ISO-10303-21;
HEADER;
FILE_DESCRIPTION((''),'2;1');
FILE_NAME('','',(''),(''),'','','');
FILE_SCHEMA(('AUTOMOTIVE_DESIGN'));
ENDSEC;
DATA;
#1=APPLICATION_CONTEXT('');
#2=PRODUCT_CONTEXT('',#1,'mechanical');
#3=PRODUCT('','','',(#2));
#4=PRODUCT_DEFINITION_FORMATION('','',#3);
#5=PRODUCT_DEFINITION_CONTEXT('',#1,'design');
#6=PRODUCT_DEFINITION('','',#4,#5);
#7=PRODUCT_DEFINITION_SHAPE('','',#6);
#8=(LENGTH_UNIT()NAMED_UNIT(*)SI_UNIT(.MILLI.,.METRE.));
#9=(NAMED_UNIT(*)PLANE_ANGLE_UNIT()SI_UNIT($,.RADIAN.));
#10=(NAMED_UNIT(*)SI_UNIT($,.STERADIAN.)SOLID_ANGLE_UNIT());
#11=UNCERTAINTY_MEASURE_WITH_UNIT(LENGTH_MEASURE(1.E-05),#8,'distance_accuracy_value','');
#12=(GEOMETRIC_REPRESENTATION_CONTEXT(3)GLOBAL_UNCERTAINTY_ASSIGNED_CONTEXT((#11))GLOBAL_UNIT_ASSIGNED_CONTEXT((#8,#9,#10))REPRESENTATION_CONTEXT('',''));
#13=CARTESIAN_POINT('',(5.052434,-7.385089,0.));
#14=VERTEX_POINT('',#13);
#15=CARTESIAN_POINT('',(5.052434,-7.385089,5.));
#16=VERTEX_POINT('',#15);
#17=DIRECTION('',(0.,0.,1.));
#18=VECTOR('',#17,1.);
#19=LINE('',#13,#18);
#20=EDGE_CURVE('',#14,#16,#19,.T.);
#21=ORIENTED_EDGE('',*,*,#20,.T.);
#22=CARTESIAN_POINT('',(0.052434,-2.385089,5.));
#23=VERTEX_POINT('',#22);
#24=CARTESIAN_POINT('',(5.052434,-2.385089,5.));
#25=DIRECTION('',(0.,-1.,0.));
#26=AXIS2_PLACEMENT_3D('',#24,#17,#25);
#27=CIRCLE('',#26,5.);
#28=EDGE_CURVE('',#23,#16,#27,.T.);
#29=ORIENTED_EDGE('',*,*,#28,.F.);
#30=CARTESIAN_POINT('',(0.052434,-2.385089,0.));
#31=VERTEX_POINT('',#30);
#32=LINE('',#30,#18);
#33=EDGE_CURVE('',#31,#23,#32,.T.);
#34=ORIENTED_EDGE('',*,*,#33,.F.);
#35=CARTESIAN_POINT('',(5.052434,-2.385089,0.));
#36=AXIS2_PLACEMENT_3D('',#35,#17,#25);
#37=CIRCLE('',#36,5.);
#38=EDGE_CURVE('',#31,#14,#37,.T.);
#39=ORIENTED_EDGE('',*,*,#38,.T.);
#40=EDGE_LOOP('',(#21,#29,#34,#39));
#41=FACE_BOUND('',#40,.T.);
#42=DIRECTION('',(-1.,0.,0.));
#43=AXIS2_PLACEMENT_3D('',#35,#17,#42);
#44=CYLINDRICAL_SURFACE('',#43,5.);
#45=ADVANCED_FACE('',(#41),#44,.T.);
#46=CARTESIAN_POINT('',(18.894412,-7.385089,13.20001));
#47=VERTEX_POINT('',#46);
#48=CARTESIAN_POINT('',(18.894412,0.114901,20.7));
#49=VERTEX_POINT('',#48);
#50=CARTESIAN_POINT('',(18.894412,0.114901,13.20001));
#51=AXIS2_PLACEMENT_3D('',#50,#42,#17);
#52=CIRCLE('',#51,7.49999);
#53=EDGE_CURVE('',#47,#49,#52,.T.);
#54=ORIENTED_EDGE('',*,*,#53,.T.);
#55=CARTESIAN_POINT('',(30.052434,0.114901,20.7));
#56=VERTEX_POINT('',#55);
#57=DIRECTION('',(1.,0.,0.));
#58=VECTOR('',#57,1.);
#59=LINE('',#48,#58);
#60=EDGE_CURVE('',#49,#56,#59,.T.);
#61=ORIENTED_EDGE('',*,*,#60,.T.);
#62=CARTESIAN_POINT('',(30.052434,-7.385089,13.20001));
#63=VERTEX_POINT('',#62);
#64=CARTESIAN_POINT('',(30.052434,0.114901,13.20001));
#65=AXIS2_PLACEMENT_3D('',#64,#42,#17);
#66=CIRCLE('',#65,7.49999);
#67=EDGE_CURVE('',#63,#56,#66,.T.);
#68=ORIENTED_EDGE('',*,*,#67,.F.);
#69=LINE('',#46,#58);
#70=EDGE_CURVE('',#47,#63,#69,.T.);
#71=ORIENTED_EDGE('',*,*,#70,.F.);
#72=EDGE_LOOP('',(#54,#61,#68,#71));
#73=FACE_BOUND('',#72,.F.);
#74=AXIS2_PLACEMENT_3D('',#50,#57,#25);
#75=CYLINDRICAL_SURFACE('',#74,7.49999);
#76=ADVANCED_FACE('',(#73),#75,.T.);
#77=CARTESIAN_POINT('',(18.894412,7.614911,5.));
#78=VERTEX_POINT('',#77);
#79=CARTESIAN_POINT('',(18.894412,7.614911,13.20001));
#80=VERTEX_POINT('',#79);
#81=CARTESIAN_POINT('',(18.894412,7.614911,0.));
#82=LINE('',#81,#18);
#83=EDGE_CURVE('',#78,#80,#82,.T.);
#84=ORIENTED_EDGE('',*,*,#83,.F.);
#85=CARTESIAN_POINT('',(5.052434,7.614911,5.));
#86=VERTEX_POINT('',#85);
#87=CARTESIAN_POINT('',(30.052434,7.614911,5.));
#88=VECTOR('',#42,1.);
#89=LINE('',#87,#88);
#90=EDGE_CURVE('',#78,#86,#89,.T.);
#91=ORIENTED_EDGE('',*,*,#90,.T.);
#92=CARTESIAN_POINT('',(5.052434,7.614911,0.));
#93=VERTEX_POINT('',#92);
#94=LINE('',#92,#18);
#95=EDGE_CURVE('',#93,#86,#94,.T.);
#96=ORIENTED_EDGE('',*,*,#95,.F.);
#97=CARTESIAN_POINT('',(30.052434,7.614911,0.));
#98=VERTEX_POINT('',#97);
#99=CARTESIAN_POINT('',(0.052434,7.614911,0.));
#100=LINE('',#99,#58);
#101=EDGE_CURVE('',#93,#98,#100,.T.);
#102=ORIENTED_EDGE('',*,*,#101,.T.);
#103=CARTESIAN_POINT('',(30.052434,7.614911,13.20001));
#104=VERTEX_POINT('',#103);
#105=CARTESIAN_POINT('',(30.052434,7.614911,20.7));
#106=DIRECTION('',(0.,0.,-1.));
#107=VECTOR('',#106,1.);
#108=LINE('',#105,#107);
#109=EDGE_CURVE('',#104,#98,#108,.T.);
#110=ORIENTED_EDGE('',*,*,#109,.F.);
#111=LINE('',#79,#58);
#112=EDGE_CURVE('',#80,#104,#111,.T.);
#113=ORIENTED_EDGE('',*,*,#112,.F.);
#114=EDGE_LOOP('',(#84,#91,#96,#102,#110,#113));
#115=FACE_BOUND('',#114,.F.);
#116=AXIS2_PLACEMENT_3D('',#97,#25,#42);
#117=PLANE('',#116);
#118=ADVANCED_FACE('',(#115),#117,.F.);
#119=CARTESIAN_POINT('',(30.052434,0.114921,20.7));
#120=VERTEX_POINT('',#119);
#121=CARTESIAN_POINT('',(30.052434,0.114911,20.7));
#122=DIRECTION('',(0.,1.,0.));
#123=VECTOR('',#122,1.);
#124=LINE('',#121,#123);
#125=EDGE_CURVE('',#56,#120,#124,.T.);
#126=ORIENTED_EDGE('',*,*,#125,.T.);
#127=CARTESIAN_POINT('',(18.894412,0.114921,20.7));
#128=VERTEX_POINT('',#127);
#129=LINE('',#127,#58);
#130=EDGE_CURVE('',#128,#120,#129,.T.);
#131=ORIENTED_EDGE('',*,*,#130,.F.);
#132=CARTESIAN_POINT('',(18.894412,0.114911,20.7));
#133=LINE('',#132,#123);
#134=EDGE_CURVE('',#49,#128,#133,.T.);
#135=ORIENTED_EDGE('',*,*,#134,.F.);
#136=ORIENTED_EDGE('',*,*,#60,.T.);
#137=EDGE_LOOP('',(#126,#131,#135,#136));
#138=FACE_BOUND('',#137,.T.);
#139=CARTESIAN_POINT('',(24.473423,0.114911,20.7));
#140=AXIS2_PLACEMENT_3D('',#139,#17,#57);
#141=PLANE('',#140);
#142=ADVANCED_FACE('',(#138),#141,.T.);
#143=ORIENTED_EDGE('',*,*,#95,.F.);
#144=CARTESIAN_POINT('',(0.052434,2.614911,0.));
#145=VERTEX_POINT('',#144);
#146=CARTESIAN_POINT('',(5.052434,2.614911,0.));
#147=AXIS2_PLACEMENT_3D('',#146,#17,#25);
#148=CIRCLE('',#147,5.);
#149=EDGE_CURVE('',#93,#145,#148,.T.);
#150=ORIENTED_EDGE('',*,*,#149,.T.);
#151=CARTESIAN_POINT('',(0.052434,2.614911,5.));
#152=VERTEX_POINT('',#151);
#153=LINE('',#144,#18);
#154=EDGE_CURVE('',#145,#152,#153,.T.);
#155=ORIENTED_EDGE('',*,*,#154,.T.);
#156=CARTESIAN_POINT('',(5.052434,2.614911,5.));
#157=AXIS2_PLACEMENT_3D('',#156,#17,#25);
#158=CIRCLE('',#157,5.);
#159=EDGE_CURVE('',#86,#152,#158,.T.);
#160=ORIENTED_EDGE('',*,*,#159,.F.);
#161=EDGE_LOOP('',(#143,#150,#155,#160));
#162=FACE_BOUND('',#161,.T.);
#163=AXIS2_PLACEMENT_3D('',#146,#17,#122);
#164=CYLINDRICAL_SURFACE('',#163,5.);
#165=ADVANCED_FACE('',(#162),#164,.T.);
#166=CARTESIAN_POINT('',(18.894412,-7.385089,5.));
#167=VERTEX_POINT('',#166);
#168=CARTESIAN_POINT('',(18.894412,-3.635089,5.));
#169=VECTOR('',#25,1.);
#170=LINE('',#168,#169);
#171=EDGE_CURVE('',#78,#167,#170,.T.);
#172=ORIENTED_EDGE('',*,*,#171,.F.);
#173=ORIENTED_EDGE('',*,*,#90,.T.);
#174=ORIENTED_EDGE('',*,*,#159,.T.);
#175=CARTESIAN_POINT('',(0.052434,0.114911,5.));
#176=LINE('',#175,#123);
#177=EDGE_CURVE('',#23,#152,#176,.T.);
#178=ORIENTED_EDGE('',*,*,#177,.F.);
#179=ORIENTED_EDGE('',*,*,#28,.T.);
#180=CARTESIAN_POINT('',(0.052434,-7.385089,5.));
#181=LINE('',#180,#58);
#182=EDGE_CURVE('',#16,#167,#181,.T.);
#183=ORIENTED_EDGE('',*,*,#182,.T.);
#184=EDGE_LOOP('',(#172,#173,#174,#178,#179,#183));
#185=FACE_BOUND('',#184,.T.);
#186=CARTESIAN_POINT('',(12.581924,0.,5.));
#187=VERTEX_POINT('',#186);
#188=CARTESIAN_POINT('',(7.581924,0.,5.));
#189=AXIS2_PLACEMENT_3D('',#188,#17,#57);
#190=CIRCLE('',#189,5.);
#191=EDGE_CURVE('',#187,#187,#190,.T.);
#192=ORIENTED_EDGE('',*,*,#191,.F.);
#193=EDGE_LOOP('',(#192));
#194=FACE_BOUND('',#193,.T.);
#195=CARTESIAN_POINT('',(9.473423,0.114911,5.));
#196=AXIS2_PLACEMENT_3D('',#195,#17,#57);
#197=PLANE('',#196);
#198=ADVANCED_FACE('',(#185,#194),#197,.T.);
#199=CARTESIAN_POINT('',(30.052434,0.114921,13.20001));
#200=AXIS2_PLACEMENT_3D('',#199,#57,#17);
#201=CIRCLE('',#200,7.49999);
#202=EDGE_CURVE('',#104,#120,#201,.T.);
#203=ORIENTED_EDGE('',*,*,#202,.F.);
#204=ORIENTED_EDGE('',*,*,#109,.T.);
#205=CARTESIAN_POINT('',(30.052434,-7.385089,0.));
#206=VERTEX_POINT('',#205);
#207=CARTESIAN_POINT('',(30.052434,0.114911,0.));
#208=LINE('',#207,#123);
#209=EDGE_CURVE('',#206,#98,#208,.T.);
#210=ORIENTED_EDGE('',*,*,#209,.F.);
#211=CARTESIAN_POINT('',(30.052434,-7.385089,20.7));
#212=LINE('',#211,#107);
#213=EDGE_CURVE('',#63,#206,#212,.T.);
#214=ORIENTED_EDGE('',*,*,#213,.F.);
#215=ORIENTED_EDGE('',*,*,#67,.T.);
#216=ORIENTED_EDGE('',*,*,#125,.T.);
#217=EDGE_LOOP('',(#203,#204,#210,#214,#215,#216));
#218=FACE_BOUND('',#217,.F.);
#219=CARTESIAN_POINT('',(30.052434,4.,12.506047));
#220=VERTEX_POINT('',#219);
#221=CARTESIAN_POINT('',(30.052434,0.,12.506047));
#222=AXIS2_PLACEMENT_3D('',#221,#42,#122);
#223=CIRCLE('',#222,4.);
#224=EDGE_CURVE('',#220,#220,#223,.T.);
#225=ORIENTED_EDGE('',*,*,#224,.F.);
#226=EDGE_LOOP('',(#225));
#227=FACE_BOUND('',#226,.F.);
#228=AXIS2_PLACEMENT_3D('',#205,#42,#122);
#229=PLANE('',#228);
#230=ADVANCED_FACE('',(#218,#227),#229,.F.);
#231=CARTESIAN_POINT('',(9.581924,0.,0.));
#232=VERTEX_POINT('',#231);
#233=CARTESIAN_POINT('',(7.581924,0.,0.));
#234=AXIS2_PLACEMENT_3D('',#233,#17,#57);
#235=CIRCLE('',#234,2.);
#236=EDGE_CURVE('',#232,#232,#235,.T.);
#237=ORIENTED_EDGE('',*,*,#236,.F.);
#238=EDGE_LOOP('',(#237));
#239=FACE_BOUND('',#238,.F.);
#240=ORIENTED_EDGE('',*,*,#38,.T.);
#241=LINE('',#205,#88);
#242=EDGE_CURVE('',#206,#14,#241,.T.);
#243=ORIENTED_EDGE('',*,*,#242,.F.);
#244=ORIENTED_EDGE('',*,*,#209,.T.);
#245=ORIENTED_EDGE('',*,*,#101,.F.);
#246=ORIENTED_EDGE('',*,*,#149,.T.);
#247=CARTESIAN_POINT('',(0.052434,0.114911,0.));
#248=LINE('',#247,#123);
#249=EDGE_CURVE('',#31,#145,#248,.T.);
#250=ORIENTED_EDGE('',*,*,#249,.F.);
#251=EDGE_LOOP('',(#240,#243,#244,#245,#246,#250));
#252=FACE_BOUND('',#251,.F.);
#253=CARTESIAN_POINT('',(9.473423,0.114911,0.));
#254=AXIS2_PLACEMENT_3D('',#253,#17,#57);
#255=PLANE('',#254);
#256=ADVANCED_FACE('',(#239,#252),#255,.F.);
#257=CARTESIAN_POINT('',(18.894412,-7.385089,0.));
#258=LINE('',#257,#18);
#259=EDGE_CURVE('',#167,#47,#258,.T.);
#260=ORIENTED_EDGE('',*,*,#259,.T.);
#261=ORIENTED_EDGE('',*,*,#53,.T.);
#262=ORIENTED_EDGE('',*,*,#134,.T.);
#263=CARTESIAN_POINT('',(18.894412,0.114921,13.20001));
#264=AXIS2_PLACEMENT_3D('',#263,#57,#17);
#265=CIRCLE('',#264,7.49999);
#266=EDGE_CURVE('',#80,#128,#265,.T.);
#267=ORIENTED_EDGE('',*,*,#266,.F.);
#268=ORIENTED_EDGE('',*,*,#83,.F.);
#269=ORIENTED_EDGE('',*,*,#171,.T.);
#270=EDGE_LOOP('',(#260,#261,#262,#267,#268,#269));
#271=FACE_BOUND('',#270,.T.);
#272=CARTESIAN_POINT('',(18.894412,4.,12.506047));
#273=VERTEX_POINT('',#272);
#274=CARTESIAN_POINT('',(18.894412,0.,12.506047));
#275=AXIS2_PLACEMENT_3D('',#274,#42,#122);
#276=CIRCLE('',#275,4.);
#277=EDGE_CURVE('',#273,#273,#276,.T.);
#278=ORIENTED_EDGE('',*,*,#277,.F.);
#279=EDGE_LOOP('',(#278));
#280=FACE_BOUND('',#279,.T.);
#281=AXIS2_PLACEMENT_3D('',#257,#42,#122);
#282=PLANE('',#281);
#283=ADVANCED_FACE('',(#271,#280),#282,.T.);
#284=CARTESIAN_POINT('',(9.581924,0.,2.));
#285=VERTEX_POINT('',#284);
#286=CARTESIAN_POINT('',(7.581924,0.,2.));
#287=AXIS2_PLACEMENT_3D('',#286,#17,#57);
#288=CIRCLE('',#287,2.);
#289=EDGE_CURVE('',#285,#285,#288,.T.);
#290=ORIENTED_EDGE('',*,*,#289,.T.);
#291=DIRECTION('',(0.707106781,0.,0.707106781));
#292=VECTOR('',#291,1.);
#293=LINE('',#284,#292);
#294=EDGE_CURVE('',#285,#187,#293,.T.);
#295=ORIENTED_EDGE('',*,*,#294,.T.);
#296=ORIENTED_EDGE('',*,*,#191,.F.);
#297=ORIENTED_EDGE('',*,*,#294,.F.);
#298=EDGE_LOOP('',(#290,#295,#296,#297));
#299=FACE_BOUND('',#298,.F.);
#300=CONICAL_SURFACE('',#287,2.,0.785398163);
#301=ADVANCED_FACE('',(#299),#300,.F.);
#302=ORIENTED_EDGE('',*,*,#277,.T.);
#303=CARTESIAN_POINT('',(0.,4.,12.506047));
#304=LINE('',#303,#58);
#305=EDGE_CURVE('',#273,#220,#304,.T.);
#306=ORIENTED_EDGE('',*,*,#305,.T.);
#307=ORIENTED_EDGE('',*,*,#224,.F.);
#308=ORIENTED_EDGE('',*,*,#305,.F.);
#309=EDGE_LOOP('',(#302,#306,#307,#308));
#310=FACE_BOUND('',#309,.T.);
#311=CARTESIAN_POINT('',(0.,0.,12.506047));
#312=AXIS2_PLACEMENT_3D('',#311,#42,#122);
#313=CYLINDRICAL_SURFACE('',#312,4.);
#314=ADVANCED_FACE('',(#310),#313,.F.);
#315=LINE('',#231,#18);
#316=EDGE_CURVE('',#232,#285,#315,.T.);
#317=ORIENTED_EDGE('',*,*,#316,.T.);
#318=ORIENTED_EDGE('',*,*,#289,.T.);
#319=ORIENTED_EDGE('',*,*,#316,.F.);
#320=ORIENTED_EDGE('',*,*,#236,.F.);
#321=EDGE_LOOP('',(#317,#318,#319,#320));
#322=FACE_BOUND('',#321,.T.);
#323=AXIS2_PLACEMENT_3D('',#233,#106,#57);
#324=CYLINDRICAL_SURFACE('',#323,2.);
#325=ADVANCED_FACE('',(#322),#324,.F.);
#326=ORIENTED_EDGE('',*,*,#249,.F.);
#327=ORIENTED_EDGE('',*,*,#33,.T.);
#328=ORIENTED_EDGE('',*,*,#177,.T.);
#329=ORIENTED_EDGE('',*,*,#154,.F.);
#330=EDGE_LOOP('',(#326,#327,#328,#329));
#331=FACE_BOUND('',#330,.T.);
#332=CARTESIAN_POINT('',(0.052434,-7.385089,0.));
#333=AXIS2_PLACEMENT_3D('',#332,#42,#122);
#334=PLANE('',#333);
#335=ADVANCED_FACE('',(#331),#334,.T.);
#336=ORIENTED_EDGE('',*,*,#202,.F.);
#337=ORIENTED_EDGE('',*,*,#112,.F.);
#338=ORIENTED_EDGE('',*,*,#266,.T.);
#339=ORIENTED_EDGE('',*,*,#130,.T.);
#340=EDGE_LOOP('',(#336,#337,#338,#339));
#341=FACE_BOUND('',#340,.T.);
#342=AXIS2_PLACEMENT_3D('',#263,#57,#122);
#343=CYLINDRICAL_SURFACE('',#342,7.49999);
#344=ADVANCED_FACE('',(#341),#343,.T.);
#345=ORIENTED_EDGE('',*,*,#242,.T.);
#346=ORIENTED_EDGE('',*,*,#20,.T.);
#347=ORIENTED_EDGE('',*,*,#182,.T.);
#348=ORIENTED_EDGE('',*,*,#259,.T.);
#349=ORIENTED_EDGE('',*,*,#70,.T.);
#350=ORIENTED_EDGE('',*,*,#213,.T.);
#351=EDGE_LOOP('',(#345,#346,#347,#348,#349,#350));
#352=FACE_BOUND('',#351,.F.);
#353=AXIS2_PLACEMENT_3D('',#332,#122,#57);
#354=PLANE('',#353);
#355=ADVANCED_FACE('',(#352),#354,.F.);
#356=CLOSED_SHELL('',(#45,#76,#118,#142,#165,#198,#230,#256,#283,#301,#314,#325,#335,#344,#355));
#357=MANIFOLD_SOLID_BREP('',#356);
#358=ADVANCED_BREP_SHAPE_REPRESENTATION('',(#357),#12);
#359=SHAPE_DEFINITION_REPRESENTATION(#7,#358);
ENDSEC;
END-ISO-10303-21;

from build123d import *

# Parameters (mm, degrees)
F0_W     = 18.8419777411
F0_H     = 15
F0_R     = 2
F0_W_2   = 11.1580222589
F1_DEPTH = 5
F2_SIZE  = 3
F3_DEPTH = 20.7
F4_R     = 4
F5_DEPTH = 55.3
F6_R     = 7.49999
F7_R     = 5


# Not quite as in the source:
# - a fillet or chamfer is up to 0.001 mm smaller than in the source, because OpenCascade refuses the exact size


with BuildPart() as f1:
    # F0 (on Top) → F1 (new body)
    with BuildSketch(Plane.XY):
        with Locations((9.4734227529, 0.1149109378)):
            Rectangle(F0_W, F0_H)
        with Locations((7.5819236226, 0)):
            Circle(F0_R, mode=Mode.SUBTRACT)
        with Locations((24.4734227529, 0.1149109378)):
            Rectangle(F0_W_2, F0_H)
    extrude(amount=F1_DEPTH)

    # F2
    f2_edges = [f1.edges().sort_by_distance(p)[0] for p in [
        (5.581924, 0, 5),
    ]]
    chamfer(f2_edges, length=F2_SIZE)

    # F0 (on Top) → F3 (join)
    with BuildSketch(Plane.XY):
        with Locations((24.4734227529, 0.1149109378)):
            Rectangle(F0_W_2, F0_H)
    extrude(amount=F3_DEPTH)

    # F4 (on Right) → F5 (cut)
    with BuildSketch(Plane.YZ):
        with Locations((0, 12.5060472637)):
            Circle(F4_R)
    extrude(amount=F5_DEPTH, mode=Mode.SUBTRACT)

    # F6 (radius 7.5 in the source; OpenCascade refuses exactly that, so slightly less here)
    f6_edges = [f1.edges().sort_by_distance(p)[0] for p in [
        (24.473423, -7.385089, 20.7),
        (24.473423, 7.614911, 20.7),
    ]]
    fillet(f6_edges, radius=F6_R)

    # F7
    f7_edges = [f1.edges().sort_by_distance(p)[0] for p in [
        (0.052434, -7.385089, 2.5),
        (0.052434, 7.614911, 2.5),
    ]]
    fillet(f7_edges, radius=F7_R)


solid = f1.part
